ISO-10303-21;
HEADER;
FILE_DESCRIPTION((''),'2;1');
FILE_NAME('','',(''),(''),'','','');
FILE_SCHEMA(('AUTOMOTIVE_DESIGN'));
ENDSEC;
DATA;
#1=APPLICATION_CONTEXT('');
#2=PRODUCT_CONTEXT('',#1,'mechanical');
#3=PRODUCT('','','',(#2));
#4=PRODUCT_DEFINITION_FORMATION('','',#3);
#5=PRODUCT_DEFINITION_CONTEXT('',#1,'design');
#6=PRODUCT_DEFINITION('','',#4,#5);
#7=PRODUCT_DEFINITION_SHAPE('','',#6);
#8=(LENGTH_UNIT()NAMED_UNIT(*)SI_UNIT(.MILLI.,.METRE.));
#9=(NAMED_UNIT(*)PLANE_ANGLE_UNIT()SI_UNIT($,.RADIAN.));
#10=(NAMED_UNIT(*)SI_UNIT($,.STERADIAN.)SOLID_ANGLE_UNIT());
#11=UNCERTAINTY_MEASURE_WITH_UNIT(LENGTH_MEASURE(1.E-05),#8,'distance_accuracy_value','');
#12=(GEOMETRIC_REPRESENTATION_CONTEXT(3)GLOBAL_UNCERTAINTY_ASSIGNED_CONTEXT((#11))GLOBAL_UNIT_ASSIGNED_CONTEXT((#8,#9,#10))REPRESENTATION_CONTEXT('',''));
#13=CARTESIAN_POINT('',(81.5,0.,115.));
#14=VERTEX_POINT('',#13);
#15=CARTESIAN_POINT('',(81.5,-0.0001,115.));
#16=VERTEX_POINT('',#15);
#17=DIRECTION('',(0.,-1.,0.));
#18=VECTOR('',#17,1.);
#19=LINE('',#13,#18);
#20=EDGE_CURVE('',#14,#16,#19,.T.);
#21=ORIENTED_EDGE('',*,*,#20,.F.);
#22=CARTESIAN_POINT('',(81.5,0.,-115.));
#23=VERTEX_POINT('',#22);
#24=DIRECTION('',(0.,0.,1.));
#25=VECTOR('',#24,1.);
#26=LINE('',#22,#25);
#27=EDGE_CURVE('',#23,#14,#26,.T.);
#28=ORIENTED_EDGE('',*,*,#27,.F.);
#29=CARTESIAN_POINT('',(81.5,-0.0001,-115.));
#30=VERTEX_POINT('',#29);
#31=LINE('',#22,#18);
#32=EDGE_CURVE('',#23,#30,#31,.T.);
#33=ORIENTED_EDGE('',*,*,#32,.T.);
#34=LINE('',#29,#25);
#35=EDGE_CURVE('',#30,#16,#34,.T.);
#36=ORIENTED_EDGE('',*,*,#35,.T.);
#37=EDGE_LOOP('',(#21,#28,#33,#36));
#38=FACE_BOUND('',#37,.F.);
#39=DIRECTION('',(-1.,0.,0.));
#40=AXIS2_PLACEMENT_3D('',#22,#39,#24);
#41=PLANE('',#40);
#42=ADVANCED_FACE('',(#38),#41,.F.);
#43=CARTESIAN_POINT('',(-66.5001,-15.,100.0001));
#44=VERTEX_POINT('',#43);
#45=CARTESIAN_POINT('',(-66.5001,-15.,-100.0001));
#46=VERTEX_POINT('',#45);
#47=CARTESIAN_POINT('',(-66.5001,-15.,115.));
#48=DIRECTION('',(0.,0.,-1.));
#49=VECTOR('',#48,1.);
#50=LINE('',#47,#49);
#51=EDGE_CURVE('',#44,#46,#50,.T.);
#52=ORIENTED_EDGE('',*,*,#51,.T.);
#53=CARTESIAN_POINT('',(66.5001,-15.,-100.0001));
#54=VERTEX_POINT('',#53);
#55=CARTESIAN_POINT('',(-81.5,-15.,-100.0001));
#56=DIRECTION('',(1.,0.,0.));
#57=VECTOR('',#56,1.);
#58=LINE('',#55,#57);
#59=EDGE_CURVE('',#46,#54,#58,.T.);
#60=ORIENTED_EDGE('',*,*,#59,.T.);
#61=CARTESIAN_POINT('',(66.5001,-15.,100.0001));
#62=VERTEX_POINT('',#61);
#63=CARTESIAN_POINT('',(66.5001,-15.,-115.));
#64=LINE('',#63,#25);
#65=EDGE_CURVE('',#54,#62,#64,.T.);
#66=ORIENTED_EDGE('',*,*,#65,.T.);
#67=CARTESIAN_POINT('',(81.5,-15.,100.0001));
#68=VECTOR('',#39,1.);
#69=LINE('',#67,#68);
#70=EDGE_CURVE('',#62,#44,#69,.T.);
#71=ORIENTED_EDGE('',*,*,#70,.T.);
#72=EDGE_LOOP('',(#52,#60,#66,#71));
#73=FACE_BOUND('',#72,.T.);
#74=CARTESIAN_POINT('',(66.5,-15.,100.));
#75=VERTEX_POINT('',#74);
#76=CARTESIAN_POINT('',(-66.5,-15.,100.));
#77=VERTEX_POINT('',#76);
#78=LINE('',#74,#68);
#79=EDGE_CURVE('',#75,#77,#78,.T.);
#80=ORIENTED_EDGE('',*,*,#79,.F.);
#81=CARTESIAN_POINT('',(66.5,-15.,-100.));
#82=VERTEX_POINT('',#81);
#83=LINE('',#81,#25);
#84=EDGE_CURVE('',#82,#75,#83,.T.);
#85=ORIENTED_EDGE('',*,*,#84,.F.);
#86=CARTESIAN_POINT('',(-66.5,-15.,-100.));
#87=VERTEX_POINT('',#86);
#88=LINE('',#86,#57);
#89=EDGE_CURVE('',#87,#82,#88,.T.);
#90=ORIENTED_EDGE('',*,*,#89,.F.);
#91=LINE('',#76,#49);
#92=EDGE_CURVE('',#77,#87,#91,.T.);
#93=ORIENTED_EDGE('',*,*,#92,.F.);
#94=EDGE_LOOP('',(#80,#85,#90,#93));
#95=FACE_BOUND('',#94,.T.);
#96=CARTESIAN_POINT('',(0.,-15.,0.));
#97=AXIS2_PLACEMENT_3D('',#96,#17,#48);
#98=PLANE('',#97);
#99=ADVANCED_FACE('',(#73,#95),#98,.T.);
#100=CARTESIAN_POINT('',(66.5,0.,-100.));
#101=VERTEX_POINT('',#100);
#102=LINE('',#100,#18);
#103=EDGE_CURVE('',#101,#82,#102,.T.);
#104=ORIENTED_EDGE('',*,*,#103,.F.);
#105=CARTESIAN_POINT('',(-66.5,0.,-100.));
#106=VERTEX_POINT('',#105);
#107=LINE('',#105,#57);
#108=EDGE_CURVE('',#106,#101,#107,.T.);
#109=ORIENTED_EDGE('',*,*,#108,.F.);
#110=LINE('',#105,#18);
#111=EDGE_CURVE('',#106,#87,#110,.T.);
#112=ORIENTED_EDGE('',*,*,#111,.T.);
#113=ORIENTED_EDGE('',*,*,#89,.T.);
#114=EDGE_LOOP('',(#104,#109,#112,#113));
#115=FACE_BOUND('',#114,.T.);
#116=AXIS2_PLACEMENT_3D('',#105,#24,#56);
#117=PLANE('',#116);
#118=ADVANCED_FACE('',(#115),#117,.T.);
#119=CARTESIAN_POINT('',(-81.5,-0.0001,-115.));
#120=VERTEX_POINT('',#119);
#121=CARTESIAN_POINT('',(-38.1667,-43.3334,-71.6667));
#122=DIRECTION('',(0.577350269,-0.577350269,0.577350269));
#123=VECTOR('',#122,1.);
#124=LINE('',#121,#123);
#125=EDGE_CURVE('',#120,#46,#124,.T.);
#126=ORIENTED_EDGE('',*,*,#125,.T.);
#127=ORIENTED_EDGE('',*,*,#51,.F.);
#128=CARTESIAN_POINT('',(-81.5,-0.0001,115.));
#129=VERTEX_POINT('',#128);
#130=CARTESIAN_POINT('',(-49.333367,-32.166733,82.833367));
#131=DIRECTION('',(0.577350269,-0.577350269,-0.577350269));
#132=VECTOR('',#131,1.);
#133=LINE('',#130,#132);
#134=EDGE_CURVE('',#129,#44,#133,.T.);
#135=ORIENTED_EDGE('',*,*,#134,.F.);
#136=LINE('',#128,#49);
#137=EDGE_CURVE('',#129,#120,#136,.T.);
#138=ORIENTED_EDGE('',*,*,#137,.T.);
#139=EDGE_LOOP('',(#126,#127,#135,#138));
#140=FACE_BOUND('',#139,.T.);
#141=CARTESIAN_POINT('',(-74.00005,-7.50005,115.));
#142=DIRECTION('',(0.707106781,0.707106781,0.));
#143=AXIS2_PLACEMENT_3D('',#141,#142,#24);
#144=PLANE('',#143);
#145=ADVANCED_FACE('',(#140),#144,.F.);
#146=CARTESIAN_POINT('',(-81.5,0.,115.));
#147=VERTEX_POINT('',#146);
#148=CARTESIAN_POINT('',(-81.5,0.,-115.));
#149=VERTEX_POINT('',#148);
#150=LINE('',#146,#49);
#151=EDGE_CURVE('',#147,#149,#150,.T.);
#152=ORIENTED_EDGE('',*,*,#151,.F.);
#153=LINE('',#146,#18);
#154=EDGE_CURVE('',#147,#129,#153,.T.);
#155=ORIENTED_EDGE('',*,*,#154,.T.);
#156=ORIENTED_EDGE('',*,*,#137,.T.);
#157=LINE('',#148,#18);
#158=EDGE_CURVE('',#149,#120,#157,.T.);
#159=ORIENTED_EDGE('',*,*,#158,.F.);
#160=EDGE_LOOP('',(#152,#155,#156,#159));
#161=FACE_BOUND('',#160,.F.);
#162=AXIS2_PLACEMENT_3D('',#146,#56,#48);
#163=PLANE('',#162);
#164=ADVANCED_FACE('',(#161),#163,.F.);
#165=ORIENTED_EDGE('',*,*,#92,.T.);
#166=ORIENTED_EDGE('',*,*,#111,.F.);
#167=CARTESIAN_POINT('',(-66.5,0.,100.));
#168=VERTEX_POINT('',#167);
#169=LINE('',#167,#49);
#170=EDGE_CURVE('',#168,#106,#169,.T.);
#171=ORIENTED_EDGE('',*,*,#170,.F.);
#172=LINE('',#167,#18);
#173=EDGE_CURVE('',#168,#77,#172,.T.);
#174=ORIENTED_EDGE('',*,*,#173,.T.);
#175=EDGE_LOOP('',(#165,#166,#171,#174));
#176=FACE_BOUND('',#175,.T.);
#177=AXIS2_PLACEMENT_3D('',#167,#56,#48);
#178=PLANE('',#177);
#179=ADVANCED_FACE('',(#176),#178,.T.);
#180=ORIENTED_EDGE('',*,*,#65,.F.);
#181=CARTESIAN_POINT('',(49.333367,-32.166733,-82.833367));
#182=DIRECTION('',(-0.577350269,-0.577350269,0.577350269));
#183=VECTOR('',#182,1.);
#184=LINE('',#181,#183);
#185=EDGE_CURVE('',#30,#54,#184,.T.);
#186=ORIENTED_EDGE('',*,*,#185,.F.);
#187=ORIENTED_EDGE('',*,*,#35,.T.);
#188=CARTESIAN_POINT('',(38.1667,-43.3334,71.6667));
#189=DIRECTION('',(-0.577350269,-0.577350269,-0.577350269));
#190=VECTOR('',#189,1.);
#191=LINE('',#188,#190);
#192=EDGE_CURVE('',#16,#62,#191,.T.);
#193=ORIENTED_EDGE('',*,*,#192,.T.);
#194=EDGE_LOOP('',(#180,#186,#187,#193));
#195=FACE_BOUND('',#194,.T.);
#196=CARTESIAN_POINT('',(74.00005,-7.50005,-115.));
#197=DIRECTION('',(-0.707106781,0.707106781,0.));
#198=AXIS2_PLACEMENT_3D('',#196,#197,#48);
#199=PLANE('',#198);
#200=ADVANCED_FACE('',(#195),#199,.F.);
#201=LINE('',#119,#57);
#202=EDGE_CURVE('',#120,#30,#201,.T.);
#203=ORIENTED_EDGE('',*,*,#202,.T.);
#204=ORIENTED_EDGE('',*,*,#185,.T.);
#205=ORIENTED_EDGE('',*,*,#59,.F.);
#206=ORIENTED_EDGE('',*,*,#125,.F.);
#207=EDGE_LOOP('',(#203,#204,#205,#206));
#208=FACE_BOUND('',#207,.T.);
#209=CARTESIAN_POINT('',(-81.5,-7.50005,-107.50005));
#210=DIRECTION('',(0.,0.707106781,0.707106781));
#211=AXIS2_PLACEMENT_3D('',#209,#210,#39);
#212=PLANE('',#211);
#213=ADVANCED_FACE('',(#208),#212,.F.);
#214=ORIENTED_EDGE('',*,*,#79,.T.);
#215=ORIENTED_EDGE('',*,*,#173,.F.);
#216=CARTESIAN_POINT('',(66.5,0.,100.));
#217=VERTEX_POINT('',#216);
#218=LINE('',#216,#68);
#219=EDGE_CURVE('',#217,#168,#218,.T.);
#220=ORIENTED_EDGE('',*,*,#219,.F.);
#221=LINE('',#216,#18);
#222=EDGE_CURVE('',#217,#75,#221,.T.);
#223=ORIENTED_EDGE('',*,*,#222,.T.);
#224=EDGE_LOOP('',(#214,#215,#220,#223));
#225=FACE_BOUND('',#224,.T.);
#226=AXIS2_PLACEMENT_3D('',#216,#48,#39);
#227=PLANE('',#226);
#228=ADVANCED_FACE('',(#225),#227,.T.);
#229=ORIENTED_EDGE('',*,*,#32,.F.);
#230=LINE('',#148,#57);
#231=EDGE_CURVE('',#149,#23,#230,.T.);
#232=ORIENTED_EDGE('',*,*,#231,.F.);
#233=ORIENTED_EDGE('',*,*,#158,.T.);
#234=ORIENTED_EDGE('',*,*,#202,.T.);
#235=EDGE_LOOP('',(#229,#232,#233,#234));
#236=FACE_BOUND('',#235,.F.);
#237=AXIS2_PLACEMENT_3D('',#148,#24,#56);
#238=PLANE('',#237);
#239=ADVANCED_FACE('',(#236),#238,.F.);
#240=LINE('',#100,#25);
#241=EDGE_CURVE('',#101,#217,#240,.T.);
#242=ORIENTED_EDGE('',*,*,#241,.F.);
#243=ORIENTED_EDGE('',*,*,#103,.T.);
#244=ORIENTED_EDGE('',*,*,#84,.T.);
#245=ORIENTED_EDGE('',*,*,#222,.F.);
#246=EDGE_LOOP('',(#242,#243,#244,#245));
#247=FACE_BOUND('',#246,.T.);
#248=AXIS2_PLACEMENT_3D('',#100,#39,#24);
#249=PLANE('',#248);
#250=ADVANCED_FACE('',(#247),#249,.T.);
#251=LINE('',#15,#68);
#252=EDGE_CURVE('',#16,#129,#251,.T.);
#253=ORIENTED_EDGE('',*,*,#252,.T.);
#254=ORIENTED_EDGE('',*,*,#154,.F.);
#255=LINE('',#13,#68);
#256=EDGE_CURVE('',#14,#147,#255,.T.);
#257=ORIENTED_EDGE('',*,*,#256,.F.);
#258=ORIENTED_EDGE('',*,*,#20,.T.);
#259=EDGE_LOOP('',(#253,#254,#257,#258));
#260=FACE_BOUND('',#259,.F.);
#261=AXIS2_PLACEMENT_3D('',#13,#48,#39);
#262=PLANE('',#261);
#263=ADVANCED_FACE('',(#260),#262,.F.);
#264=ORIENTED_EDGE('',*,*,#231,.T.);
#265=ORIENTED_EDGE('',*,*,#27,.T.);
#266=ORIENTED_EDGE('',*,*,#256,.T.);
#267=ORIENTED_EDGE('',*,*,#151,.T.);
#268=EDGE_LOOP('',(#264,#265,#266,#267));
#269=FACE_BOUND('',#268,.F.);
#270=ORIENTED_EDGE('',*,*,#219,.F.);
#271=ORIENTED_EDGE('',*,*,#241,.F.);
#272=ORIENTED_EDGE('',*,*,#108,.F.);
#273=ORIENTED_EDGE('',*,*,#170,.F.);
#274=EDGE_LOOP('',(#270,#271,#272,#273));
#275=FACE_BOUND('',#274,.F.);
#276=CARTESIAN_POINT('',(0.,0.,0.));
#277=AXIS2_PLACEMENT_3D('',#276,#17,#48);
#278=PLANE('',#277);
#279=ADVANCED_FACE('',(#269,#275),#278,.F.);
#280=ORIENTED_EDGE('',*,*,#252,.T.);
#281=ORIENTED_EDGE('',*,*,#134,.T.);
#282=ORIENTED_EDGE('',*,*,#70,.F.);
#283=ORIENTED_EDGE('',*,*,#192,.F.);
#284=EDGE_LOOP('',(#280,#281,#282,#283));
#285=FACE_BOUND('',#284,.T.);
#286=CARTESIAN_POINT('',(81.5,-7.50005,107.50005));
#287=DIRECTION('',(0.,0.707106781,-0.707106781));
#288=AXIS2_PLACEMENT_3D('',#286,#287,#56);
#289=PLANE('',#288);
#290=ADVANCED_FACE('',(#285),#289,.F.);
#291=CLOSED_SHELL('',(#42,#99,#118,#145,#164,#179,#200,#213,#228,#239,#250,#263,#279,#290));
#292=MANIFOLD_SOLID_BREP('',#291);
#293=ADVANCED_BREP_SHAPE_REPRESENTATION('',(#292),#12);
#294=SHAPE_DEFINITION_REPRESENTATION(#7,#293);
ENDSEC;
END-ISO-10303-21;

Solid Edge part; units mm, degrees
sketch "Sketch1" plane through (0, 0, 0) normal (0, -1, 0) x (1, 0, 0)
  line L0 (66.5, 100) -> (-66.5, 100)
  line L1 (-66.5, 100) -> (-66.5, -100)
  line L2 (-66.5, -100) -> (66.5, -100)
  line L3 (66.5, -100) -> (66.5, 100)
  line L4 (81.5, 115) -> (-81.5, 115)
  line L5 (-81.5, 115) -> (-81.5, -115)
  line L6 (-81.5, -115) -> (81.5, -115)
  line L7 (81.5, -115) -> (81.5, 115)
  dimension "D1" = 133
  dimension "D2" = 200
  dimension "D3" = 15
extrude "Protrusion1" add sketch "Sketch1" along normal blind 15
chamfer "Fase_1" distance 15 angle 45 4 edges at (-81.5, -15, 0) (0, -15, 115) (81.5, -15, 0) (0, -15, -115)
